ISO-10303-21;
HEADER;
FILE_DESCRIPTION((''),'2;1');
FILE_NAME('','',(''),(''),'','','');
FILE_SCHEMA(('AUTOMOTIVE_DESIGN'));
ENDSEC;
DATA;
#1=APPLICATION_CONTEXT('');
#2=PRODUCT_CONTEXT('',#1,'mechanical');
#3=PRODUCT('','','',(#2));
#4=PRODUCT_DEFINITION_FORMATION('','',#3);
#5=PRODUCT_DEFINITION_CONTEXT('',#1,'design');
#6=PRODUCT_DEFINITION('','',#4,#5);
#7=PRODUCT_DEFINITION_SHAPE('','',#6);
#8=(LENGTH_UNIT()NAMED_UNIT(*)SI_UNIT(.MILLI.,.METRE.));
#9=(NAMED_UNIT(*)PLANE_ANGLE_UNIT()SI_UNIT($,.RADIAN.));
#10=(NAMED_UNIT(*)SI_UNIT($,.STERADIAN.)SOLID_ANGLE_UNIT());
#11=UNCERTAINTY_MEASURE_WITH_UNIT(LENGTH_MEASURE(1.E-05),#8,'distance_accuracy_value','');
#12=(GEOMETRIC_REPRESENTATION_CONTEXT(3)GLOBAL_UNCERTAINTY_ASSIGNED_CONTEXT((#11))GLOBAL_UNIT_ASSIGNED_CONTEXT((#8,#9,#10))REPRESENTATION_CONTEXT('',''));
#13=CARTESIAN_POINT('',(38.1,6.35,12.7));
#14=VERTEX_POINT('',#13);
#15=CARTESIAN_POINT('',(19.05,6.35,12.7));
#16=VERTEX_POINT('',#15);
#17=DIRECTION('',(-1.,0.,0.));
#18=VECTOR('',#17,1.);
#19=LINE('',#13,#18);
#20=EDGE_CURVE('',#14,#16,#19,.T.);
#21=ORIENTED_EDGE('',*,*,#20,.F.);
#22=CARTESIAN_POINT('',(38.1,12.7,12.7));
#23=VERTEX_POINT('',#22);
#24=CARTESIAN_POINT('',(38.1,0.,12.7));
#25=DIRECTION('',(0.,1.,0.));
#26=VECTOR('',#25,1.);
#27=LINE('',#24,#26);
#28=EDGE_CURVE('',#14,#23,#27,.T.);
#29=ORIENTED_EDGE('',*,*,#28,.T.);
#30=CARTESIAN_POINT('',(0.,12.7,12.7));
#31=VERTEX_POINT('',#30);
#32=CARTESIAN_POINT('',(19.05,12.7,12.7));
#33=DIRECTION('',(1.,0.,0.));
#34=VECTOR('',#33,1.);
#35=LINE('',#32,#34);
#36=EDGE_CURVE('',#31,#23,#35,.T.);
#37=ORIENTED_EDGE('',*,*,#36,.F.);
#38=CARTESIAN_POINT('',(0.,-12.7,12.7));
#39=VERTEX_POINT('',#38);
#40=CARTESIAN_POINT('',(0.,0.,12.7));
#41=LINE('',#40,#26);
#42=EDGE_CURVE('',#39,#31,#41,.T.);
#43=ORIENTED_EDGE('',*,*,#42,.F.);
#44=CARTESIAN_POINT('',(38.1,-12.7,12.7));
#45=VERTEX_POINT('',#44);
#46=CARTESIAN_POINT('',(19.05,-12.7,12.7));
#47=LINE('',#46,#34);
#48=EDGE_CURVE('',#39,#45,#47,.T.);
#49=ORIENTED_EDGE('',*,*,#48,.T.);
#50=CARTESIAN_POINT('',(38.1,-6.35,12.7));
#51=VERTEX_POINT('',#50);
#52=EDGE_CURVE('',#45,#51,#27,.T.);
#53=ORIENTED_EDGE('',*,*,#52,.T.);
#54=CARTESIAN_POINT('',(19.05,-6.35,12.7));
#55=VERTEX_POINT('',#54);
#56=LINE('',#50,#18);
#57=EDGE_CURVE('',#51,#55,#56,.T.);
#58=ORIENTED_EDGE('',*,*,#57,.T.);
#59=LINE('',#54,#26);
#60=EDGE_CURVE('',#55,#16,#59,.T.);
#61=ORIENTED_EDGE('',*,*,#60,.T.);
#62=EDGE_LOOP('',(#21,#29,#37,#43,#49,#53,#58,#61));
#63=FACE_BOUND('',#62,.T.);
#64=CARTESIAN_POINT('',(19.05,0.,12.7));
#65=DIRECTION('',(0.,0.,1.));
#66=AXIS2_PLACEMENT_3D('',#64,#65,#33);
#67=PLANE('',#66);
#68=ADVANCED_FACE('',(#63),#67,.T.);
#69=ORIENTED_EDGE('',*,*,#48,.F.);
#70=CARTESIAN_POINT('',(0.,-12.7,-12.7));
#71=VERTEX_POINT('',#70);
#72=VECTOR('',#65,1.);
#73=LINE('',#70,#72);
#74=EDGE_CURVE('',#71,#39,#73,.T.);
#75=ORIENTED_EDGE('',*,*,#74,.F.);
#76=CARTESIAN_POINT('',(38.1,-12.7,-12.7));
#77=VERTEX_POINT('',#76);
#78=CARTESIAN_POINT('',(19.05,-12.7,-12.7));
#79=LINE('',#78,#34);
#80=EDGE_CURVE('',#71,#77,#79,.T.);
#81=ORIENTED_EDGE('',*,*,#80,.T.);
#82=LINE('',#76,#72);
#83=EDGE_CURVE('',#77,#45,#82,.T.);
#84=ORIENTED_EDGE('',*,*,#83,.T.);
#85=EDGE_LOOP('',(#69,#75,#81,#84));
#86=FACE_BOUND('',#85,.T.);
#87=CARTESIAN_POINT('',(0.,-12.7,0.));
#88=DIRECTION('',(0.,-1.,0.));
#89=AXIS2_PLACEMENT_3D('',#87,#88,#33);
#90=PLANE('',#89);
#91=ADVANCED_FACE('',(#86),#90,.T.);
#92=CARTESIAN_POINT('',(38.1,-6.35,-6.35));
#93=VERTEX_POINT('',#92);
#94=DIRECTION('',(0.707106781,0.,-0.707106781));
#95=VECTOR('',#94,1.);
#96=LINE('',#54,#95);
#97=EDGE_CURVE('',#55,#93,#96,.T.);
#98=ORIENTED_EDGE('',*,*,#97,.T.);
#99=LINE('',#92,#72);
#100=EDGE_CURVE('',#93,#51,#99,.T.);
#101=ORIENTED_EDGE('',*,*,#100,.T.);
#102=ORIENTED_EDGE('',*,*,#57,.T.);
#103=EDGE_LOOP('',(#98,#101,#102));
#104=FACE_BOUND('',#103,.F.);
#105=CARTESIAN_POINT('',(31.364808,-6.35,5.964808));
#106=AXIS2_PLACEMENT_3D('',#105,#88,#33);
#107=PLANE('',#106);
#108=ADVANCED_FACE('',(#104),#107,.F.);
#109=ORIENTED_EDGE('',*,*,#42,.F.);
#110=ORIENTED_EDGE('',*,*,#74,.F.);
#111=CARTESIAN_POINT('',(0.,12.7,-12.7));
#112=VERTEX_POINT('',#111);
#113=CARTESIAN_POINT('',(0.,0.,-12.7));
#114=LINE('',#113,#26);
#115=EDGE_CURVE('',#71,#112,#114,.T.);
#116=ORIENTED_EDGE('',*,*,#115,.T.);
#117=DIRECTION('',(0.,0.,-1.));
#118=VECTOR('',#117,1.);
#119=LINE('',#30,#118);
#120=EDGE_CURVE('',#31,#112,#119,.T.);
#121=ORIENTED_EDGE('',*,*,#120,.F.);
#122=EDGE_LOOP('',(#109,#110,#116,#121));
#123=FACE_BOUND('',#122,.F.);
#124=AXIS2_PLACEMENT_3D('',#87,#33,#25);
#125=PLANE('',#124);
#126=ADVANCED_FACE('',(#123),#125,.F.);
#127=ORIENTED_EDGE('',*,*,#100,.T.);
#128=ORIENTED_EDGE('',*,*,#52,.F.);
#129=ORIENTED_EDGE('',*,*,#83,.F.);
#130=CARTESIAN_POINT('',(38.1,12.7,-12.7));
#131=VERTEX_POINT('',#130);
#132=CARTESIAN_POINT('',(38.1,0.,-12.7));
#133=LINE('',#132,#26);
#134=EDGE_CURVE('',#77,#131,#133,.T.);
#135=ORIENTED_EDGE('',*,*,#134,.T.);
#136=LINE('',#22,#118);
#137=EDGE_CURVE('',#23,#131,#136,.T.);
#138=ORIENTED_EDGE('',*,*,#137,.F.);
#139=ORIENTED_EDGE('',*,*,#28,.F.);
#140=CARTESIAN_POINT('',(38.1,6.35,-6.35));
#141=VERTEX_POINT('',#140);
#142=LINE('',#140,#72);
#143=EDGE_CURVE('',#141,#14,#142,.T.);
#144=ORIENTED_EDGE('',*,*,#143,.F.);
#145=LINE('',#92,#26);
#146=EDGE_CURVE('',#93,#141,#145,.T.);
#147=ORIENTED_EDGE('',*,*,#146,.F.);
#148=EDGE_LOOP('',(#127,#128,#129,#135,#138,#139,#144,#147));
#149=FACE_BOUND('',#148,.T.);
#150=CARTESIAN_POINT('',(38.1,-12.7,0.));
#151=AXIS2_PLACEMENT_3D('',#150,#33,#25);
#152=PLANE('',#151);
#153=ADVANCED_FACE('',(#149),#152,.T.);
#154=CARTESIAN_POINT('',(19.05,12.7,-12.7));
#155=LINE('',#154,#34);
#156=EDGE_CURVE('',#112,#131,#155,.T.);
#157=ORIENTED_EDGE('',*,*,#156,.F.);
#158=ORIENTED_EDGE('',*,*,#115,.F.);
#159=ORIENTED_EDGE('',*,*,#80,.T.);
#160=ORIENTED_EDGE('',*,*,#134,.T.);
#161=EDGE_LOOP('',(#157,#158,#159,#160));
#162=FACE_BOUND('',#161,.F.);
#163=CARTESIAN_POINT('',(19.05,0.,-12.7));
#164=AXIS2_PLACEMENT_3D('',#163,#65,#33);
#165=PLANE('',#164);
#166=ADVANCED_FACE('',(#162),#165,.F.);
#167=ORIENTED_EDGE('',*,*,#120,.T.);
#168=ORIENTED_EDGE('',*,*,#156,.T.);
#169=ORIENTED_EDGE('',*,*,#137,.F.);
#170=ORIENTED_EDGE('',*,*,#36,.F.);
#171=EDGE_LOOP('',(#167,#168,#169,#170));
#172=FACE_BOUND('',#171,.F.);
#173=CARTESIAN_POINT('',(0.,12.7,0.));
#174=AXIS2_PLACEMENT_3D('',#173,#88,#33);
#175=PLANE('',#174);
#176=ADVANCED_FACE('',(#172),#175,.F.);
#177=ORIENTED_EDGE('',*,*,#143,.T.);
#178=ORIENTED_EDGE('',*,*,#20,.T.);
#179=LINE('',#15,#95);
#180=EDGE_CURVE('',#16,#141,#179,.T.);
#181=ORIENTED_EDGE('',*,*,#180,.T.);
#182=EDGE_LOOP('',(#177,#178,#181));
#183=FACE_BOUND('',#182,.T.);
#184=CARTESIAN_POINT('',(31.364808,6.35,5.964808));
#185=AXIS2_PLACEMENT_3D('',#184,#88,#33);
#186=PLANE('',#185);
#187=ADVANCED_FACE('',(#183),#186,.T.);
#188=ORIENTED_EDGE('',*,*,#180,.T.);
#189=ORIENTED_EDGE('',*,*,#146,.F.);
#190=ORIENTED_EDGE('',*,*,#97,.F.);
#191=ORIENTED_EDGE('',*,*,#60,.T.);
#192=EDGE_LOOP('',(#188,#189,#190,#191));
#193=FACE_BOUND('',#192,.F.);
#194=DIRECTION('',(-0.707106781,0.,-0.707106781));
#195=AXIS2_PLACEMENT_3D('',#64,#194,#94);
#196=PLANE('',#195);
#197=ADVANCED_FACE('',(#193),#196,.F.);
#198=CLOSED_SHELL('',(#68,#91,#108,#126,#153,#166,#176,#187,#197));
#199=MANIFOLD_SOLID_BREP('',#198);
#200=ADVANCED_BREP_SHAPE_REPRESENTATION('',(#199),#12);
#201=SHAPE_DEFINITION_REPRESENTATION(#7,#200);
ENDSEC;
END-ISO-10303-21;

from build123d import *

# Parameters (mm, degrees)
F0_W     = 38.1
F0_H     = 25.4
F1_DEPTH = 12.7
F3_DEPTH = 6.35


# Not quite as in the source:
# - a feature names something its author has since deleted; it is built from what else it names


with BuildPart() as f1:
    # F0 (on Top) → F1 (new body, symmetric)
    with BuildSketch(Plane.XY):
        with Locations((19.05, 0)):
            Rectangle(F0_W, F0_H)
    extrude(amount=F1_DEPTH, both=True)

    # F2 (on Front) → F3 (cut, symmetric)
    with BuildSketch(Plane.XZ):
        Polygon((38.1, -6.35), (38.1, 12.7), (19.05, 12.7), align=None)
    extrude(amount=F3_DEPTH, both=True, mode=Mode.SUBTRACT)


solid = f1.part
